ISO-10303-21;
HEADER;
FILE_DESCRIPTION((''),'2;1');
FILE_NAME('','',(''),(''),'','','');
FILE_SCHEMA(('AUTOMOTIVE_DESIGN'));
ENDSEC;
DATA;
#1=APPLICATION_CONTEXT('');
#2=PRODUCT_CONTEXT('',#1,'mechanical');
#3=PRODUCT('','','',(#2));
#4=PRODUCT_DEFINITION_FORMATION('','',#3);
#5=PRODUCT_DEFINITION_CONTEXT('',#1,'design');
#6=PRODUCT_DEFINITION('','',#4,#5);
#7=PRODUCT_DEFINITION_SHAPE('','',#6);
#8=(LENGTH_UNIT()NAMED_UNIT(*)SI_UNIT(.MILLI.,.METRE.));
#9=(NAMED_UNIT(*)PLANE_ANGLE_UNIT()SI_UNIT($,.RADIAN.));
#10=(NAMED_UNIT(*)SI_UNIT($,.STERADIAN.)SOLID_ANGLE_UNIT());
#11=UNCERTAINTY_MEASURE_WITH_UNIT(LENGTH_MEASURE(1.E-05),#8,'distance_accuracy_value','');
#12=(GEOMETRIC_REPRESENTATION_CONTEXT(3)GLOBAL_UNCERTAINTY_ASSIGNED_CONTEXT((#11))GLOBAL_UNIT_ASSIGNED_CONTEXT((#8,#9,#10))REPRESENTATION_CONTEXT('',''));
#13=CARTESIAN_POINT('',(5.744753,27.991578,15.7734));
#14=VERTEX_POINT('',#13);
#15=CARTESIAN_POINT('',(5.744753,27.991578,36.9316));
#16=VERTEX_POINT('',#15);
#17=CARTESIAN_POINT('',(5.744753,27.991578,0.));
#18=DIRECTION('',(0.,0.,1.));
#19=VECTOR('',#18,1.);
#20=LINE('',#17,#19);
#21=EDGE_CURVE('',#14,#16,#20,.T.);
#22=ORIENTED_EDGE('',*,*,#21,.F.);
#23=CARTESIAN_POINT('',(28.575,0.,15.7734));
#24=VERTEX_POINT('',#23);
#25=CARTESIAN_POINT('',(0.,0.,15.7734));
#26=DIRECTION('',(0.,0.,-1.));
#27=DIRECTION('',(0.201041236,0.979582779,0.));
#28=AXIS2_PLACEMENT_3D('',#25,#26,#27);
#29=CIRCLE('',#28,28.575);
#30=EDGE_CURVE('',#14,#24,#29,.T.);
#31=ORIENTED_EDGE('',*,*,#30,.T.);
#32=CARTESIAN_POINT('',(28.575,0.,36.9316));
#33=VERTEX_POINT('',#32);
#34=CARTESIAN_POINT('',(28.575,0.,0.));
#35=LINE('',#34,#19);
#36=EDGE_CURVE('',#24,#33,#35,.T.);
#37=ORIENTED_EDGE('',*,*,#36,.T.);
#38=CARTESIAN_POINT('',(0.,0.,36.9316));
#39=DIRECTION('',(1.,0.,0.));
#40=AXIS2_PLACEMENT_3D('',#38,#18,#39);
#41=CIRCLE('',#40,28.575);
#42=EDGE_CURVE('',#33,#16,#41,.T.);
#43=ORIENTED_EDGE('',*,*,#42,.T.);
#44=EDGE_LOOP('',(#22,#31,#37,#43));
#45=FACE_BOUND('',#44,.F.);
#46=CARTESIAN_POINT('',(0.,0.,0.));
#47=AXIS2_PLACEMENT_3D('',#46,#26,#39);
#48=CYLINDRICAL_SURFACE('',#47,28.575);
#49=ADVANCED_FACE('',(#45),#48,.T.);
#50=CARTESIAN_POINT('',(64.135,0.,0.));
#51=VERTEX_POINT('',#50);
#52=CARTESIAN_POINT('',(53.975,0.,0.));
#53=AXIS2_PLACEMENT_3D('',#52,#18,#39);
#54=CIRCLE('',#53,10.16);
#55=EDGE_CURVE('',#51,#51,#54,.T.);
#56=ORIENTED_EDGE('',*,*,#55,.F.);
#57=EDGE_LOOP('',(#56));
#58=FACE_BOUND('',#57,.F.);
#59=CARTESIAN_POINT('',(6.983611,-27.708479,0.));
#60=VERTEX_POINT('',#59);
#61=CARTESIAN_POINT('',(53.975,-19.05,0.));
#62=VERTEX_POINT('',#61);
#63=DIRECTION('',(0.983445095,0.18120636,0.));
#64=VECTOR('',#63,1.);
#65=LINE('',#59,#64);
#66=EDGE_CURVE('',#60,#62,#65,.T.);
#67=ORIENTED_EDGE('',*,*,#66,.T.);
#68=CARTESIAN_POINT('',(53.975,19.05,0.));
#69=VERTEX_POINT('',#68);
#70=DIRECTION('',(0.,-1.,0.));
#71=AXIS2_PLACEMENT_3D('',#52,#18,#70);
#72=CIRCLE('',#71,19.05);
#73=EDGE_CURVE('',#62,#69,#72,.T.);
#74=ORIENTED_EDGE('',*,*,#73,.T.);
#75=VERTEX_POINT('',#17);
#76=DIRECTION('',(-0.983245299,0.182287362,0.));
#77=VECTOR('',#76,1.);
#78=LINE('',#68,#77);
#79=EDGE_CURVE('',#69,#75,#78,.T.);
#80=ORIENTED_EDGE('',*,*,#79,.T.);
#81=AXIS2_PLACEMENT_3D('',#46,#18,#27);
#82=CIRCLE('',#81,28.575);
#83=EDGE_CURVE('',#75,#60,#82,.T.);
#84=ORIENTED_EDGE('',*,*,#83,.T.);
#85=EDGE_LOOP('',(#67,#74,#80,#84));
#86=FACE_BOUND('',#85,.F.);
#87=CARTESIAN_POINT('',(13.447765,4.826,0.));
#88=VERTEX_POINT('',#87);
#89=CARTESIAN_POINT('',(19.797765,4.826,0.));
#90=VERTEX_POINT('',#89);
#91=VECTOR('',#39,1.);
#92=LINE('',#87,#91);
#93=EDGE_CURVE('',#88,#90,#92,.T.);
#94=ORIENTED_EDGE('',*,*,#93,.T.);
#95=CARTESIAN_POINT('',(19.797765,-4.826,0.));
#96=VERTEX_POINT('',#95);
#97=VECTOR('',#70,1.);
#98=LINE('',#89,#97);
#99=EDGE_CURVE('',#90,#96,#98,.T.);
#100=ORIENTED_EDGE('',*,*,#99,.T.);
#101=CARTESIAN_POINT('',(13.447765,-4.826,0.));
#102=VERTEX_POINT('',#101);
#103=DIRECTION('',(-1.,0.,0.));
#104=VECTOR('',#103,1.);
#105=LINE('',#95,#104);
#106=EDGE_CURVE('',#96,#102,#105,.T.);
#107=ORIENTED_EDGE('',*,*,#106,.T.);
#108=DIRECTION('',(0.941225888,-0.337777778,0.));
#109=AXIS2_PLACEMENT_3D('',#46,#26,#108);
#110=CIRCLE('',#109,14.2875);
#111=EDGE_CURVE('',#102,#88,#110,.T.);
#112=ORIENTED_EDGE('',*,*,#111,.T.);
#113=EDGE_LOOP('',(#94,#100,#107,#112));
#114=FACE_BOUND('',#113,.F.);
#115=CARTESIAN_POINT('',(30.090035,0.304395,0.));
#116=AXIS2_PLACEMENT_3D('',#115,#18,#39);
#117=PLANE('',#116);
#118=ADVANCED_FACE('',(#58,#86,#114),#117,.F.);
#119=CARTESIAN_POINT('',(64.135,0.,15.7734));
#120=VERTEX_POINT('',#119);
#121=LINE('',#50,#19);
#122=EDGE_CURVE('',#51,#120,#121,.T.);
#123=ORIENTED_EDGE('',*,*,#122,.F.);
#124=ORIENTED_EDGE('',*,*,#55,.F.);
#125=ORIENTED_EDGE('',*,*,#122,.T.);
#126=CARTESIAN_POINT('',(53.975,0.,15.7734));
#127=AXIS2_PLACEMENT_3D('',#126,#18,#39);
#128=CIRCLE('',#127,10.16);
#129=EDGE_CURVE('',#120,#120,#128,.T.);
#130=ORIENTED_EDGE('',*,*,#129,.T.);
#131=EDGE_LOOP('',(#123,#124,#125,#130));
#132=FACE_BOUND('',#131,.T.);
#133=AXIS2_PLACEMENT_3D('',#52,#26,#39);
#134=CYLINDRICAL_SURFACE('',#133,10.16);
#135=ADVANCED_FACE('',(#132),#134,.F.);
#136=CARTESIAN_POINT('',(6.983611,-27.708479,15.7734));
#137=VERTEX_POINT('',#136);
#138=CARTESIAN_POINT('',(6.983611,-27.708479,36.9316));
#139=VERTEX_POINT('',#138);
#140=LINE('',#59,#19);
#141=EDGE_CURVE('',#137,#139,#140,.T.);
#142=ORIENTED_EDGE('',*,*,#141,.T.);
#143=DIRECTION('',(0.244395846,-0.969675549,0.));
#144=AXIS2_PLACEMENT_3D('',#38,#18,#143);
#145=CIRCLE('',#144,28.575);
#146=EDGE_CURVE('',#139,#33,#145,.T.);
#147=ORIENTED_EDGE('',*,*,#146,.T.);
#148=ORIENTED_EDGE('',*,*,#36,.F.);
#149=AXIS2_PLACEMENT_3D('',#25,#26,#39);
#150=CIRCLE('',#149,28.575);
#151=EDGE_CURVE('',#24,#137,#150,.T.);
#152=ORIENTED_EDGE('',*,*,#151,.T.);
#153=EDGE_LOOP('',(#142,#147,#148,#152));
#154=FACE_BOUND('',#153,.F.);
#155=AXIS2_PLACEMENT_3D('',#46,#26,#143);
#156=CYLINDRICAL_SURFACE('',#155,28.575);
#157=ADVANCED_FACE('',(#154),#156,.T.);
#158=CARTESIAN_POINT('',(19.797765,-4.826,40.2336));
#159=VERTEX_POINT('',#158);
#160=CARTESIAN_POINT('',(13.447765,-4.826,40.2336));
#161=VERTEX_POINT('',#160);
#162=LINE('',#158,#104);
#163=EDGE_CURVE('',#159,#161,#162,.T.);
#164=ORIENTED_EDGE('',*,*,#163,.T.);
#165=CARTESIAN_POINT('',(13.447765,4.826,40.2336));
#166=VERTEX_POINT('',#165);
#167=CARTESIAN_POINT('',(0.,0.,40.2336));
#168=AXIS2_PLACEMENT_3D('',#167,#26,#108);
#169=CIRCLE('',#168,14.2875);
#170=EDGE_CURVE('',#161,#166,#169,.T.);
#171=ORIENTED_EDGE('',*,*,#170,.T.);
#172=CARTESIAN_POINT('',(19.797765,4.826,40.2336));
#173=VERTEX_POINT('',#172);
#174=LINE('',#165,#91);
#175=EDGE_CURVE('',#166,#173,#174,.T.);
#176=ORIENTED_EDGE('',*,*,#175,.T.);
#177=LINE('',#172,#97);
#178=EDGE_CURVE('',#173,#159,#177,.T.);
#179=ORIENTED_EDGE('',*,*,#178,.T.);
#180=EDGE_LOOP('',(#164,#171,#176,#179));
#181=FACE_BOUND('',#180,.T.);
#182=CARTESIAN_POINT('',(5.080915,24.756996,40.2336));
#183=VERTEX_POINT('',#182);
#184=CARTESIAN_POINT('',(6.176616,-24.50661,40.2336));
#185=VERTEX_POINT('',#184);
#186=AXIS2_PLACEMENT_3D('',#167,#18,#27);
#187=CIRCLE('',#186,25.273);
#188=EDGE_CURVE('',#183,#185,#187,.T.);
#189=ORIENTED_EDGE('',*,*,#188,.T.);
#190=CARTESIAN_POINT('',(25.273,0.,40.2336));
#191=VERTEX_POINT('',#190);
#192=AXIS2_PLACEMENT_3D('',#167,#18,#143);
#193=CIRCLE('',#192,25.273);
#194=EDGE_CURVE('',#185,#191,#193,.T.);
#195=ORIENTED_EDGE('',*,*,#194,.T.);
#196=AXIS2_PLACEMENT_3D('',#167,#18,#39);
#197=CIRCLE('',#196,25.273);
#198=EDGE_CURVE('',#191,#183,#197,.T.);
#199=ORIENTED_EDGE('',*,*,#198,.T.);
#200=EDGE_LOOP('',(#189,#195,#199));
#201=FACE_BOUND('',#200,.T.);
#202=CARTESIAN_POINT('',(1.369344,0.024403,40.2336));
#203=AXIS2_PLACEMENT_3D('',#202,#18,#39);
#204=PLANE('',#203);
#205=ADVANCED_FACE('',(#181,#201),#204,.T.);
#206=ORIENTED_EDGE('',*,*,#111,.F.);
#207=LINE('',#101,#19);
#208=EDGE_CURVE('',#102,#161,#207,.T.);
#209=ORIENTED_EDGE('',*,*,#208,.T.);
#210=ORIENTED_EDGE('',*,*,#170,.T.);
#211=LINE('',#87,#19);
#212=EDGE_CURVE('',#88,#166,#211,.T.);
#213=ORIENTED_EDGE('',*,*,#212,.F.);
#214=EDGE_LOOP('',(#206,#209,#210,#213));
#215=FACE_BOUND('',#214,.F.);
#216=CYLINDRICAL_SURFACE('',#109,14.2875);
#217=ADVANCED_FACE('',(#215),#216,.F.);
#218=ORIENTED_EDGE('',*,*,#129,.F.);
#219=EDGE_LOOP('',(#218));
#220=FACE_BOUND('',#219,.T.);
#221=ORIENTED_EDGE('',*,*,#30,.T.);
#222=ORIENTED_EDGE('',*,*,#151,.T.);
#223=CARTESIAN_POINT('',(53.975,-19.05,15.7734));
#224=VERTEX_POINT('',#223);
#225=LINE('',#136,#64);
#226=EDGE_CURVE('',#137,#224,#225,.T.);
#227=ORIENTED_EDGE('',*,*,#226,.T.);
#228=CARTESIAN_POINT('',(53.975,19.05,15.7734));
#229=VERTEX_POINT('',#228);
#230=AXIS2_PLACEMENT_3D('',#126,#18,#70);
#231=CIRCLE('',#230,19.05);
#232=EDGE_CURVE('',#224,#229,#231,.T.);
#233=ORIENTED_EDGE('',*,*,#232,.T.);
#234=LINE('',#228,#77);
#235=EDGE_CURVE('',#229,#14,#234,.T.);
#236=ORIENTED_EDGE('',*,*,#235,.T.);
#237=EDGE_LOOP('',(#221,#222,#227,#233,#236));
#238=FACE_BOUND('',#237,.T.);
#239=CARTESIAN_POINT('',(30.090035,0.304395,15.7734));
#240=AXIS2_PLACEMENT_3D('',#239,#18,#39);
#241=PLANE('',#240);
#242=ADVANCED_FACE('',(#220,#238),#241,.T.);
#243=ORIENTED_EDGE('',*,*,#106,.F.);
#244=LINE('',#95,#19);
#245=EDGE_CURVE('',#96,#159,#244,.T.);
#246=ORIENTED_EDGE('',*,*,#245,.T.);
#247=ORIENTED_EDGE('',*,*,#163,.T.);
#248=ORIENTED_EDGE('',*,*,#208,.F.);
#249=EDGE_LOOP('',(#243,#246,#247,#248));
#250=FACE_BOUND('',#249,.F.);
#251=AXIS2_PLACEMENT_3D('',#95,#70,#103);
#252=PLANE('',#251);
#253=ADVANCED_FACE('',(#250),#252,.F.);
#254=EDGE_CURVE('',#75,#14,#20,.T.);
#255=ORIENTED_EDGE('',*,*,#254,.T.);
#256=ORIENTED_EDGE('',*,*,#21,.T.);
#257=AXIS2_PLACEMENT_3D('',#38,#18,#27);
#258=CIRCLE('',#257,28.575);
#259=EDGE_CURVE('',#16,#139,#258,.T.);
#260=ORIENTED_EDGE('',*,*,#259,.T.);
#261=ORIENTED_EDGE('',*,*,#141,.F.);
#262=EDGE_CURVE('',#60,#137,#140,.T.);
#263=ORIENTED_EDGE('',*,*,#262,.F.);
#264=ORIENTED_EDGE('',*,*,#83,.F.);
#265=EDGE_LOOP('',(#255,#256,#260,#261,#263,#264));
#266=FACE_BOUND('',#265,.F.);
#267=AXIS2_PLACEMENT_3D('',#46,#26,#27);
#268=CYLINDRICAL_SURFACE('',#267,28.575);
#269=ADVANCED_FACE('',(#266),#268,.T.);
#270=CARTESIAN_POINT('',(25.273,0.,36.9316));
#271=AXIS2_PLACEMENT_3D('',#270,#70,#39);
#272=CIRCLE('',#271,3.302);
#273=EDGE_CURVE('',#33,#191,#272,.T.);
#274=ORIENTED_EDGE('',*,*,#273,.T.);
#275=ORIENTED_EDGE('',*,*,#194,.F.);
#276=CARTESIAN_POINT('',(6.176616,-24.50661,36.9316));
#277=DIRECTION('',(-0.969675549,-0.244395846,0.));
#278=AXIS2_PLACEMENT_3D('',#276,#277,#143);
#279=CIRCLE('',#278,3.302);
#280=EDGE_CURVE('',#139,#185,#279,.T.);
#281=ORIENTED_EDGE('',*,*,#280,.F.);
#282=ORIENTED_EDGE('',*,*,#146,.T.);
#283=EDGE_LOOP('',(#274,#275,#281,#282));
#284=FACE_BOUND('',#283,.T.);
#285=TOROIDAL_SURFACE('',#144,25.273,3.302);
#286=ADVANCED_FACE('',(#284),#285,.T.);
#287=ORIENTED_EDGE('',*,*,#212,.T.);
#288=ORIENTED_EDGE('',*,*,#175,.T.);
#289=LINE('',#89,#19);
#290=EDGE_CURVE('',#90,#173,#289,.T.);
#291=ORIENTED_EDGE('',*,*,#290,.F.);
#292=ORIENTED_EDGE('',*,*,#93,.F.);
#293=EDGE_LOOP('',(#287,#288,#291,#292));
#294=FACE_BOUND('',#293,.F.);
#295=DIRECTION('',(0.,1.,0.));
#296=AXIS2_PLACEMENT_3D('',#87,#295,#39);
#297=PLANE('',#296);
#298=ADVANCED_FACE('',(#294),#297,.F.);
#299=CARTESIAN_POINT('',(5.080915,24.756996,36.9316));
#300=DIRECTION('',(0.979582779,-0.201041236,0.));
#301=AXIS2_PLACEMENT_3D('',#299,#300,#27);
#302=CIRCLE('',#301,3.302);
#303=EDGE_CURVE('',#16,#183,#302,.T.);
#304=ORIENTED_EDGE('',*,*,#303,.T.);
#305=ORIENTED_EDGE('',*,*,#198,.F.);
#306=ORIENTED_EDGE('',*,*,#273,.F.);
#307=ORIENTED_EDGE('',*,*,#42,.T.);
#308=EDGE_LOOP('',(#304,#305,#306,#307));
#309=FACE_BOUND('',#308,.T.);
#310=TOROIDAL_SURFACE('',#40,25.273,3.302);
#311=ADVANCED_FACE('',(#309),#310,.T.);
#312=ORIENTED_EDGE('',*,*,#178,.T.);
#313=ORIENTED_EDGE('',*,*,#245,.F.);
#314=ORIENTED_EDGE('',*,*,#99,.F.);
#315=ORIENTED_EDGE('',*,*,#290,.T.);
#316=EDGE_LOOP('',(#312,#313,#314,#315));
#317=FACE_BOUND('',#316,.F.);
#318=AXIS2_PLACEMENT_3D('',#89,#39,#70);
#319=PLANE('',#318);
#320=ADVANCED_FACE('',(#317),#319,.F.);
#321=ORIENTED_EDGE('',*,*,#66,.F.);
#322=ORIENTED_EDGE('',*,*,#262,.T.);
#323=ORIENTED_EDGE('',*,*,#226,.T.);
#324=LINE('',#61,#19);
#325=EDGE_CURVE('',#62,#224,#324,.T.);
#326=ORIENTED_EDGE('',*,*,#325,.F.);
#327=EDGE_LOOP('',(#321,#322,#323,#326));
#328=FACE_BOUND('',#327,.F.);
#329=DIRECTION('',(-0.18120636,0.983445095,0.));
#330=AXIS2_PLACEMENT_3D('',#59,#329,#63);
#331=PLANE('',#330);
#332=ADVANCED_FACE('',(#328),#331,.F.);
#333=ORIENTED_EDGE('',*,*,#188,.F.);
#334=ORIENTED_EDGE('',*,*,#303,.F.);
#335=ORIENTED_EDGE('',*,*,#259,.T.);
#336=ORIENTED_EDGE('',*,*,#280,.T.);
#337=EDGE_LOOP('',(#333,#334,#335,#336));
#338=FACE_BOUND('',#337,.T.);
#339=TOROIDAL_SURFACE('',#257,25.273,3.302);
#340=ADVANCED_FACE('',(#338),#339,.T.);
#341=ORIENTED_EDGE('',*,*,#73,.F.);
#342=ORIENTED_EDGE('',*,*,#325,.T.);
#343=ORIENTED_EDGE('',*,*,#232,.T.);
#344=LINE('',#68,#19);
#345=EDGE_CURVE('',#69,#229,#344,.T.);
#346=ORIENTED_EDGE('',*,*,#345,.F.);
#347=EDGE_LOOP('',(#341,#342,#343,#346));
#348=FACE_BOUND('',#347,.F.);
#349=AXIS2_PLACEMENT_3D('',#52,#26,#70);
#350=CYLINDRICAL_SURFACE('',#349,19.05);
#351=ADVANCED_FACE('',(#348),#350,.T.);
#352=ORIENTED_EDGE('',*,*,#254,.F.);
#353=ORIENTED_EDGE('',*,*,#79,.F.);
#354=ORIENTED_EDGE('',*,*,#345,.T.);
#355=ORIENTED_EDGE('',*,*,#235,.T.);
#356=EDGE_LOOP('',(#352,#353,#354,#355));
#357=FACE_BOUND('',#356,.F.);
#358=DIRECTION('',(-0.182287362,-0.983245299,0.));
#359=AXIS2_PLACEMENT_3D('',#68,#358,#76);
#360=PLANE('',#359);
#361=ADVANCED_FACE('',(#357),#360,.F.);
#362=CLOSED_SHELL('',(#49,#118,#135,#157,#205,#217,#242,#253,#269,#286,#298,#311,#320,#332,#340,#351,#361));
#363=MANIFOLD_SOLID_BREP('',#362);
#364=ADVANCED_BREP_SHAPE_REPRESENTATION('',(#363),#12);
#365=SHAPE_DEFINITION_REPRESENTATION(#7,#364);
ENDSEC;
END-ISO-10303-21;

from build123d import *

# Parameters (mm, degrees)
F1_DEPTH = 40.2336
F0_R     = 10.16
F2_DEPTH = 15.7734
F3_R     = 3.302


# Not quite as in the source:
# - a feature names something its author has since deleted; it is built from what else it names


with BuildPart() as f1:
    # F0 (on Top) → F1 (new body)
    with BuildSketch(Plane.XY):
        with BuildLine():
            ThreePointArc((6.9836113022, -27.7084788139), (22.5398238454, -17.5637970274), (28.575, 0))
            ThreePointArc((28.575, 0), (22.1437005793, 18.0606519721), (5.7447533049, 27.9915779203))
            ThreePointArc((5.7447533049, 27.9915779203), (-28.5679347598, -0.6353963805), (6.9836113022, -27.7084788139))
        make_face()
        with BuildLine():
            ThreePointArc((13.4477648793, -4.826), (-14.2875, 0), (13.4477648793, 4.826))
            Line((13.4477648793, 4.826), (19.7977648793, 4.826))
            Line((19.7977648793, 4.826), (19.7977648793, -4.826))
            Line((19.7977648793, -4.826), (13.4477648793, -4.826))
        make_face(mode=Mode.SUBTRACT)
    extrude(amount=F1_DEPTH)

    # F0 (on Top) → F2 (join)
    with BuildSketch(Plane.XY):
        with BuildLine():
            ThreePointArc((5.7447533049, 27.9915779203), (22.1437005793, 18.0606519721), (28.575, 0))
            ThreePointArc((28.575, 0), (22.5398238454, -17.5637970274), (6.9836113022, -27.7084788139))
            Line((6.9836113022, -27.7084788139), (53.975, -19.05))
            ThreePointArc((53.975, -19.05), (34.925, 0), (53.975, 19.05))
            Line((53.975, 19.05), (5.7447533049, 27.9915779203))
        make_face()
        with BuildLine():
            ThreePointArc((73.025, 0), (67.4453841816, 13.4703841816), (53.975, 19.05))
            ThreePointArc((53.975, 19.05), (34.925, 0), (53.975, -19.05))
            ThreePointArc((53.975, -19.05), (67.4453841816, -13.4703841816), (73.025, 0))
        make_face()
        with Locations((53.975, 0)):
            Circle(F0_R, mode=Mode.SUBTRACT)
    extrude(amount=F2_DEPTH)

    # F3
    f3_edges = [f1.edges().sort_by_distance(p)[0] for p in [
        (-6.983611, 27.708479, 40.2336),
    ]]
    fillet(f3_edges, radius=F3_R)


solid = f1.part
